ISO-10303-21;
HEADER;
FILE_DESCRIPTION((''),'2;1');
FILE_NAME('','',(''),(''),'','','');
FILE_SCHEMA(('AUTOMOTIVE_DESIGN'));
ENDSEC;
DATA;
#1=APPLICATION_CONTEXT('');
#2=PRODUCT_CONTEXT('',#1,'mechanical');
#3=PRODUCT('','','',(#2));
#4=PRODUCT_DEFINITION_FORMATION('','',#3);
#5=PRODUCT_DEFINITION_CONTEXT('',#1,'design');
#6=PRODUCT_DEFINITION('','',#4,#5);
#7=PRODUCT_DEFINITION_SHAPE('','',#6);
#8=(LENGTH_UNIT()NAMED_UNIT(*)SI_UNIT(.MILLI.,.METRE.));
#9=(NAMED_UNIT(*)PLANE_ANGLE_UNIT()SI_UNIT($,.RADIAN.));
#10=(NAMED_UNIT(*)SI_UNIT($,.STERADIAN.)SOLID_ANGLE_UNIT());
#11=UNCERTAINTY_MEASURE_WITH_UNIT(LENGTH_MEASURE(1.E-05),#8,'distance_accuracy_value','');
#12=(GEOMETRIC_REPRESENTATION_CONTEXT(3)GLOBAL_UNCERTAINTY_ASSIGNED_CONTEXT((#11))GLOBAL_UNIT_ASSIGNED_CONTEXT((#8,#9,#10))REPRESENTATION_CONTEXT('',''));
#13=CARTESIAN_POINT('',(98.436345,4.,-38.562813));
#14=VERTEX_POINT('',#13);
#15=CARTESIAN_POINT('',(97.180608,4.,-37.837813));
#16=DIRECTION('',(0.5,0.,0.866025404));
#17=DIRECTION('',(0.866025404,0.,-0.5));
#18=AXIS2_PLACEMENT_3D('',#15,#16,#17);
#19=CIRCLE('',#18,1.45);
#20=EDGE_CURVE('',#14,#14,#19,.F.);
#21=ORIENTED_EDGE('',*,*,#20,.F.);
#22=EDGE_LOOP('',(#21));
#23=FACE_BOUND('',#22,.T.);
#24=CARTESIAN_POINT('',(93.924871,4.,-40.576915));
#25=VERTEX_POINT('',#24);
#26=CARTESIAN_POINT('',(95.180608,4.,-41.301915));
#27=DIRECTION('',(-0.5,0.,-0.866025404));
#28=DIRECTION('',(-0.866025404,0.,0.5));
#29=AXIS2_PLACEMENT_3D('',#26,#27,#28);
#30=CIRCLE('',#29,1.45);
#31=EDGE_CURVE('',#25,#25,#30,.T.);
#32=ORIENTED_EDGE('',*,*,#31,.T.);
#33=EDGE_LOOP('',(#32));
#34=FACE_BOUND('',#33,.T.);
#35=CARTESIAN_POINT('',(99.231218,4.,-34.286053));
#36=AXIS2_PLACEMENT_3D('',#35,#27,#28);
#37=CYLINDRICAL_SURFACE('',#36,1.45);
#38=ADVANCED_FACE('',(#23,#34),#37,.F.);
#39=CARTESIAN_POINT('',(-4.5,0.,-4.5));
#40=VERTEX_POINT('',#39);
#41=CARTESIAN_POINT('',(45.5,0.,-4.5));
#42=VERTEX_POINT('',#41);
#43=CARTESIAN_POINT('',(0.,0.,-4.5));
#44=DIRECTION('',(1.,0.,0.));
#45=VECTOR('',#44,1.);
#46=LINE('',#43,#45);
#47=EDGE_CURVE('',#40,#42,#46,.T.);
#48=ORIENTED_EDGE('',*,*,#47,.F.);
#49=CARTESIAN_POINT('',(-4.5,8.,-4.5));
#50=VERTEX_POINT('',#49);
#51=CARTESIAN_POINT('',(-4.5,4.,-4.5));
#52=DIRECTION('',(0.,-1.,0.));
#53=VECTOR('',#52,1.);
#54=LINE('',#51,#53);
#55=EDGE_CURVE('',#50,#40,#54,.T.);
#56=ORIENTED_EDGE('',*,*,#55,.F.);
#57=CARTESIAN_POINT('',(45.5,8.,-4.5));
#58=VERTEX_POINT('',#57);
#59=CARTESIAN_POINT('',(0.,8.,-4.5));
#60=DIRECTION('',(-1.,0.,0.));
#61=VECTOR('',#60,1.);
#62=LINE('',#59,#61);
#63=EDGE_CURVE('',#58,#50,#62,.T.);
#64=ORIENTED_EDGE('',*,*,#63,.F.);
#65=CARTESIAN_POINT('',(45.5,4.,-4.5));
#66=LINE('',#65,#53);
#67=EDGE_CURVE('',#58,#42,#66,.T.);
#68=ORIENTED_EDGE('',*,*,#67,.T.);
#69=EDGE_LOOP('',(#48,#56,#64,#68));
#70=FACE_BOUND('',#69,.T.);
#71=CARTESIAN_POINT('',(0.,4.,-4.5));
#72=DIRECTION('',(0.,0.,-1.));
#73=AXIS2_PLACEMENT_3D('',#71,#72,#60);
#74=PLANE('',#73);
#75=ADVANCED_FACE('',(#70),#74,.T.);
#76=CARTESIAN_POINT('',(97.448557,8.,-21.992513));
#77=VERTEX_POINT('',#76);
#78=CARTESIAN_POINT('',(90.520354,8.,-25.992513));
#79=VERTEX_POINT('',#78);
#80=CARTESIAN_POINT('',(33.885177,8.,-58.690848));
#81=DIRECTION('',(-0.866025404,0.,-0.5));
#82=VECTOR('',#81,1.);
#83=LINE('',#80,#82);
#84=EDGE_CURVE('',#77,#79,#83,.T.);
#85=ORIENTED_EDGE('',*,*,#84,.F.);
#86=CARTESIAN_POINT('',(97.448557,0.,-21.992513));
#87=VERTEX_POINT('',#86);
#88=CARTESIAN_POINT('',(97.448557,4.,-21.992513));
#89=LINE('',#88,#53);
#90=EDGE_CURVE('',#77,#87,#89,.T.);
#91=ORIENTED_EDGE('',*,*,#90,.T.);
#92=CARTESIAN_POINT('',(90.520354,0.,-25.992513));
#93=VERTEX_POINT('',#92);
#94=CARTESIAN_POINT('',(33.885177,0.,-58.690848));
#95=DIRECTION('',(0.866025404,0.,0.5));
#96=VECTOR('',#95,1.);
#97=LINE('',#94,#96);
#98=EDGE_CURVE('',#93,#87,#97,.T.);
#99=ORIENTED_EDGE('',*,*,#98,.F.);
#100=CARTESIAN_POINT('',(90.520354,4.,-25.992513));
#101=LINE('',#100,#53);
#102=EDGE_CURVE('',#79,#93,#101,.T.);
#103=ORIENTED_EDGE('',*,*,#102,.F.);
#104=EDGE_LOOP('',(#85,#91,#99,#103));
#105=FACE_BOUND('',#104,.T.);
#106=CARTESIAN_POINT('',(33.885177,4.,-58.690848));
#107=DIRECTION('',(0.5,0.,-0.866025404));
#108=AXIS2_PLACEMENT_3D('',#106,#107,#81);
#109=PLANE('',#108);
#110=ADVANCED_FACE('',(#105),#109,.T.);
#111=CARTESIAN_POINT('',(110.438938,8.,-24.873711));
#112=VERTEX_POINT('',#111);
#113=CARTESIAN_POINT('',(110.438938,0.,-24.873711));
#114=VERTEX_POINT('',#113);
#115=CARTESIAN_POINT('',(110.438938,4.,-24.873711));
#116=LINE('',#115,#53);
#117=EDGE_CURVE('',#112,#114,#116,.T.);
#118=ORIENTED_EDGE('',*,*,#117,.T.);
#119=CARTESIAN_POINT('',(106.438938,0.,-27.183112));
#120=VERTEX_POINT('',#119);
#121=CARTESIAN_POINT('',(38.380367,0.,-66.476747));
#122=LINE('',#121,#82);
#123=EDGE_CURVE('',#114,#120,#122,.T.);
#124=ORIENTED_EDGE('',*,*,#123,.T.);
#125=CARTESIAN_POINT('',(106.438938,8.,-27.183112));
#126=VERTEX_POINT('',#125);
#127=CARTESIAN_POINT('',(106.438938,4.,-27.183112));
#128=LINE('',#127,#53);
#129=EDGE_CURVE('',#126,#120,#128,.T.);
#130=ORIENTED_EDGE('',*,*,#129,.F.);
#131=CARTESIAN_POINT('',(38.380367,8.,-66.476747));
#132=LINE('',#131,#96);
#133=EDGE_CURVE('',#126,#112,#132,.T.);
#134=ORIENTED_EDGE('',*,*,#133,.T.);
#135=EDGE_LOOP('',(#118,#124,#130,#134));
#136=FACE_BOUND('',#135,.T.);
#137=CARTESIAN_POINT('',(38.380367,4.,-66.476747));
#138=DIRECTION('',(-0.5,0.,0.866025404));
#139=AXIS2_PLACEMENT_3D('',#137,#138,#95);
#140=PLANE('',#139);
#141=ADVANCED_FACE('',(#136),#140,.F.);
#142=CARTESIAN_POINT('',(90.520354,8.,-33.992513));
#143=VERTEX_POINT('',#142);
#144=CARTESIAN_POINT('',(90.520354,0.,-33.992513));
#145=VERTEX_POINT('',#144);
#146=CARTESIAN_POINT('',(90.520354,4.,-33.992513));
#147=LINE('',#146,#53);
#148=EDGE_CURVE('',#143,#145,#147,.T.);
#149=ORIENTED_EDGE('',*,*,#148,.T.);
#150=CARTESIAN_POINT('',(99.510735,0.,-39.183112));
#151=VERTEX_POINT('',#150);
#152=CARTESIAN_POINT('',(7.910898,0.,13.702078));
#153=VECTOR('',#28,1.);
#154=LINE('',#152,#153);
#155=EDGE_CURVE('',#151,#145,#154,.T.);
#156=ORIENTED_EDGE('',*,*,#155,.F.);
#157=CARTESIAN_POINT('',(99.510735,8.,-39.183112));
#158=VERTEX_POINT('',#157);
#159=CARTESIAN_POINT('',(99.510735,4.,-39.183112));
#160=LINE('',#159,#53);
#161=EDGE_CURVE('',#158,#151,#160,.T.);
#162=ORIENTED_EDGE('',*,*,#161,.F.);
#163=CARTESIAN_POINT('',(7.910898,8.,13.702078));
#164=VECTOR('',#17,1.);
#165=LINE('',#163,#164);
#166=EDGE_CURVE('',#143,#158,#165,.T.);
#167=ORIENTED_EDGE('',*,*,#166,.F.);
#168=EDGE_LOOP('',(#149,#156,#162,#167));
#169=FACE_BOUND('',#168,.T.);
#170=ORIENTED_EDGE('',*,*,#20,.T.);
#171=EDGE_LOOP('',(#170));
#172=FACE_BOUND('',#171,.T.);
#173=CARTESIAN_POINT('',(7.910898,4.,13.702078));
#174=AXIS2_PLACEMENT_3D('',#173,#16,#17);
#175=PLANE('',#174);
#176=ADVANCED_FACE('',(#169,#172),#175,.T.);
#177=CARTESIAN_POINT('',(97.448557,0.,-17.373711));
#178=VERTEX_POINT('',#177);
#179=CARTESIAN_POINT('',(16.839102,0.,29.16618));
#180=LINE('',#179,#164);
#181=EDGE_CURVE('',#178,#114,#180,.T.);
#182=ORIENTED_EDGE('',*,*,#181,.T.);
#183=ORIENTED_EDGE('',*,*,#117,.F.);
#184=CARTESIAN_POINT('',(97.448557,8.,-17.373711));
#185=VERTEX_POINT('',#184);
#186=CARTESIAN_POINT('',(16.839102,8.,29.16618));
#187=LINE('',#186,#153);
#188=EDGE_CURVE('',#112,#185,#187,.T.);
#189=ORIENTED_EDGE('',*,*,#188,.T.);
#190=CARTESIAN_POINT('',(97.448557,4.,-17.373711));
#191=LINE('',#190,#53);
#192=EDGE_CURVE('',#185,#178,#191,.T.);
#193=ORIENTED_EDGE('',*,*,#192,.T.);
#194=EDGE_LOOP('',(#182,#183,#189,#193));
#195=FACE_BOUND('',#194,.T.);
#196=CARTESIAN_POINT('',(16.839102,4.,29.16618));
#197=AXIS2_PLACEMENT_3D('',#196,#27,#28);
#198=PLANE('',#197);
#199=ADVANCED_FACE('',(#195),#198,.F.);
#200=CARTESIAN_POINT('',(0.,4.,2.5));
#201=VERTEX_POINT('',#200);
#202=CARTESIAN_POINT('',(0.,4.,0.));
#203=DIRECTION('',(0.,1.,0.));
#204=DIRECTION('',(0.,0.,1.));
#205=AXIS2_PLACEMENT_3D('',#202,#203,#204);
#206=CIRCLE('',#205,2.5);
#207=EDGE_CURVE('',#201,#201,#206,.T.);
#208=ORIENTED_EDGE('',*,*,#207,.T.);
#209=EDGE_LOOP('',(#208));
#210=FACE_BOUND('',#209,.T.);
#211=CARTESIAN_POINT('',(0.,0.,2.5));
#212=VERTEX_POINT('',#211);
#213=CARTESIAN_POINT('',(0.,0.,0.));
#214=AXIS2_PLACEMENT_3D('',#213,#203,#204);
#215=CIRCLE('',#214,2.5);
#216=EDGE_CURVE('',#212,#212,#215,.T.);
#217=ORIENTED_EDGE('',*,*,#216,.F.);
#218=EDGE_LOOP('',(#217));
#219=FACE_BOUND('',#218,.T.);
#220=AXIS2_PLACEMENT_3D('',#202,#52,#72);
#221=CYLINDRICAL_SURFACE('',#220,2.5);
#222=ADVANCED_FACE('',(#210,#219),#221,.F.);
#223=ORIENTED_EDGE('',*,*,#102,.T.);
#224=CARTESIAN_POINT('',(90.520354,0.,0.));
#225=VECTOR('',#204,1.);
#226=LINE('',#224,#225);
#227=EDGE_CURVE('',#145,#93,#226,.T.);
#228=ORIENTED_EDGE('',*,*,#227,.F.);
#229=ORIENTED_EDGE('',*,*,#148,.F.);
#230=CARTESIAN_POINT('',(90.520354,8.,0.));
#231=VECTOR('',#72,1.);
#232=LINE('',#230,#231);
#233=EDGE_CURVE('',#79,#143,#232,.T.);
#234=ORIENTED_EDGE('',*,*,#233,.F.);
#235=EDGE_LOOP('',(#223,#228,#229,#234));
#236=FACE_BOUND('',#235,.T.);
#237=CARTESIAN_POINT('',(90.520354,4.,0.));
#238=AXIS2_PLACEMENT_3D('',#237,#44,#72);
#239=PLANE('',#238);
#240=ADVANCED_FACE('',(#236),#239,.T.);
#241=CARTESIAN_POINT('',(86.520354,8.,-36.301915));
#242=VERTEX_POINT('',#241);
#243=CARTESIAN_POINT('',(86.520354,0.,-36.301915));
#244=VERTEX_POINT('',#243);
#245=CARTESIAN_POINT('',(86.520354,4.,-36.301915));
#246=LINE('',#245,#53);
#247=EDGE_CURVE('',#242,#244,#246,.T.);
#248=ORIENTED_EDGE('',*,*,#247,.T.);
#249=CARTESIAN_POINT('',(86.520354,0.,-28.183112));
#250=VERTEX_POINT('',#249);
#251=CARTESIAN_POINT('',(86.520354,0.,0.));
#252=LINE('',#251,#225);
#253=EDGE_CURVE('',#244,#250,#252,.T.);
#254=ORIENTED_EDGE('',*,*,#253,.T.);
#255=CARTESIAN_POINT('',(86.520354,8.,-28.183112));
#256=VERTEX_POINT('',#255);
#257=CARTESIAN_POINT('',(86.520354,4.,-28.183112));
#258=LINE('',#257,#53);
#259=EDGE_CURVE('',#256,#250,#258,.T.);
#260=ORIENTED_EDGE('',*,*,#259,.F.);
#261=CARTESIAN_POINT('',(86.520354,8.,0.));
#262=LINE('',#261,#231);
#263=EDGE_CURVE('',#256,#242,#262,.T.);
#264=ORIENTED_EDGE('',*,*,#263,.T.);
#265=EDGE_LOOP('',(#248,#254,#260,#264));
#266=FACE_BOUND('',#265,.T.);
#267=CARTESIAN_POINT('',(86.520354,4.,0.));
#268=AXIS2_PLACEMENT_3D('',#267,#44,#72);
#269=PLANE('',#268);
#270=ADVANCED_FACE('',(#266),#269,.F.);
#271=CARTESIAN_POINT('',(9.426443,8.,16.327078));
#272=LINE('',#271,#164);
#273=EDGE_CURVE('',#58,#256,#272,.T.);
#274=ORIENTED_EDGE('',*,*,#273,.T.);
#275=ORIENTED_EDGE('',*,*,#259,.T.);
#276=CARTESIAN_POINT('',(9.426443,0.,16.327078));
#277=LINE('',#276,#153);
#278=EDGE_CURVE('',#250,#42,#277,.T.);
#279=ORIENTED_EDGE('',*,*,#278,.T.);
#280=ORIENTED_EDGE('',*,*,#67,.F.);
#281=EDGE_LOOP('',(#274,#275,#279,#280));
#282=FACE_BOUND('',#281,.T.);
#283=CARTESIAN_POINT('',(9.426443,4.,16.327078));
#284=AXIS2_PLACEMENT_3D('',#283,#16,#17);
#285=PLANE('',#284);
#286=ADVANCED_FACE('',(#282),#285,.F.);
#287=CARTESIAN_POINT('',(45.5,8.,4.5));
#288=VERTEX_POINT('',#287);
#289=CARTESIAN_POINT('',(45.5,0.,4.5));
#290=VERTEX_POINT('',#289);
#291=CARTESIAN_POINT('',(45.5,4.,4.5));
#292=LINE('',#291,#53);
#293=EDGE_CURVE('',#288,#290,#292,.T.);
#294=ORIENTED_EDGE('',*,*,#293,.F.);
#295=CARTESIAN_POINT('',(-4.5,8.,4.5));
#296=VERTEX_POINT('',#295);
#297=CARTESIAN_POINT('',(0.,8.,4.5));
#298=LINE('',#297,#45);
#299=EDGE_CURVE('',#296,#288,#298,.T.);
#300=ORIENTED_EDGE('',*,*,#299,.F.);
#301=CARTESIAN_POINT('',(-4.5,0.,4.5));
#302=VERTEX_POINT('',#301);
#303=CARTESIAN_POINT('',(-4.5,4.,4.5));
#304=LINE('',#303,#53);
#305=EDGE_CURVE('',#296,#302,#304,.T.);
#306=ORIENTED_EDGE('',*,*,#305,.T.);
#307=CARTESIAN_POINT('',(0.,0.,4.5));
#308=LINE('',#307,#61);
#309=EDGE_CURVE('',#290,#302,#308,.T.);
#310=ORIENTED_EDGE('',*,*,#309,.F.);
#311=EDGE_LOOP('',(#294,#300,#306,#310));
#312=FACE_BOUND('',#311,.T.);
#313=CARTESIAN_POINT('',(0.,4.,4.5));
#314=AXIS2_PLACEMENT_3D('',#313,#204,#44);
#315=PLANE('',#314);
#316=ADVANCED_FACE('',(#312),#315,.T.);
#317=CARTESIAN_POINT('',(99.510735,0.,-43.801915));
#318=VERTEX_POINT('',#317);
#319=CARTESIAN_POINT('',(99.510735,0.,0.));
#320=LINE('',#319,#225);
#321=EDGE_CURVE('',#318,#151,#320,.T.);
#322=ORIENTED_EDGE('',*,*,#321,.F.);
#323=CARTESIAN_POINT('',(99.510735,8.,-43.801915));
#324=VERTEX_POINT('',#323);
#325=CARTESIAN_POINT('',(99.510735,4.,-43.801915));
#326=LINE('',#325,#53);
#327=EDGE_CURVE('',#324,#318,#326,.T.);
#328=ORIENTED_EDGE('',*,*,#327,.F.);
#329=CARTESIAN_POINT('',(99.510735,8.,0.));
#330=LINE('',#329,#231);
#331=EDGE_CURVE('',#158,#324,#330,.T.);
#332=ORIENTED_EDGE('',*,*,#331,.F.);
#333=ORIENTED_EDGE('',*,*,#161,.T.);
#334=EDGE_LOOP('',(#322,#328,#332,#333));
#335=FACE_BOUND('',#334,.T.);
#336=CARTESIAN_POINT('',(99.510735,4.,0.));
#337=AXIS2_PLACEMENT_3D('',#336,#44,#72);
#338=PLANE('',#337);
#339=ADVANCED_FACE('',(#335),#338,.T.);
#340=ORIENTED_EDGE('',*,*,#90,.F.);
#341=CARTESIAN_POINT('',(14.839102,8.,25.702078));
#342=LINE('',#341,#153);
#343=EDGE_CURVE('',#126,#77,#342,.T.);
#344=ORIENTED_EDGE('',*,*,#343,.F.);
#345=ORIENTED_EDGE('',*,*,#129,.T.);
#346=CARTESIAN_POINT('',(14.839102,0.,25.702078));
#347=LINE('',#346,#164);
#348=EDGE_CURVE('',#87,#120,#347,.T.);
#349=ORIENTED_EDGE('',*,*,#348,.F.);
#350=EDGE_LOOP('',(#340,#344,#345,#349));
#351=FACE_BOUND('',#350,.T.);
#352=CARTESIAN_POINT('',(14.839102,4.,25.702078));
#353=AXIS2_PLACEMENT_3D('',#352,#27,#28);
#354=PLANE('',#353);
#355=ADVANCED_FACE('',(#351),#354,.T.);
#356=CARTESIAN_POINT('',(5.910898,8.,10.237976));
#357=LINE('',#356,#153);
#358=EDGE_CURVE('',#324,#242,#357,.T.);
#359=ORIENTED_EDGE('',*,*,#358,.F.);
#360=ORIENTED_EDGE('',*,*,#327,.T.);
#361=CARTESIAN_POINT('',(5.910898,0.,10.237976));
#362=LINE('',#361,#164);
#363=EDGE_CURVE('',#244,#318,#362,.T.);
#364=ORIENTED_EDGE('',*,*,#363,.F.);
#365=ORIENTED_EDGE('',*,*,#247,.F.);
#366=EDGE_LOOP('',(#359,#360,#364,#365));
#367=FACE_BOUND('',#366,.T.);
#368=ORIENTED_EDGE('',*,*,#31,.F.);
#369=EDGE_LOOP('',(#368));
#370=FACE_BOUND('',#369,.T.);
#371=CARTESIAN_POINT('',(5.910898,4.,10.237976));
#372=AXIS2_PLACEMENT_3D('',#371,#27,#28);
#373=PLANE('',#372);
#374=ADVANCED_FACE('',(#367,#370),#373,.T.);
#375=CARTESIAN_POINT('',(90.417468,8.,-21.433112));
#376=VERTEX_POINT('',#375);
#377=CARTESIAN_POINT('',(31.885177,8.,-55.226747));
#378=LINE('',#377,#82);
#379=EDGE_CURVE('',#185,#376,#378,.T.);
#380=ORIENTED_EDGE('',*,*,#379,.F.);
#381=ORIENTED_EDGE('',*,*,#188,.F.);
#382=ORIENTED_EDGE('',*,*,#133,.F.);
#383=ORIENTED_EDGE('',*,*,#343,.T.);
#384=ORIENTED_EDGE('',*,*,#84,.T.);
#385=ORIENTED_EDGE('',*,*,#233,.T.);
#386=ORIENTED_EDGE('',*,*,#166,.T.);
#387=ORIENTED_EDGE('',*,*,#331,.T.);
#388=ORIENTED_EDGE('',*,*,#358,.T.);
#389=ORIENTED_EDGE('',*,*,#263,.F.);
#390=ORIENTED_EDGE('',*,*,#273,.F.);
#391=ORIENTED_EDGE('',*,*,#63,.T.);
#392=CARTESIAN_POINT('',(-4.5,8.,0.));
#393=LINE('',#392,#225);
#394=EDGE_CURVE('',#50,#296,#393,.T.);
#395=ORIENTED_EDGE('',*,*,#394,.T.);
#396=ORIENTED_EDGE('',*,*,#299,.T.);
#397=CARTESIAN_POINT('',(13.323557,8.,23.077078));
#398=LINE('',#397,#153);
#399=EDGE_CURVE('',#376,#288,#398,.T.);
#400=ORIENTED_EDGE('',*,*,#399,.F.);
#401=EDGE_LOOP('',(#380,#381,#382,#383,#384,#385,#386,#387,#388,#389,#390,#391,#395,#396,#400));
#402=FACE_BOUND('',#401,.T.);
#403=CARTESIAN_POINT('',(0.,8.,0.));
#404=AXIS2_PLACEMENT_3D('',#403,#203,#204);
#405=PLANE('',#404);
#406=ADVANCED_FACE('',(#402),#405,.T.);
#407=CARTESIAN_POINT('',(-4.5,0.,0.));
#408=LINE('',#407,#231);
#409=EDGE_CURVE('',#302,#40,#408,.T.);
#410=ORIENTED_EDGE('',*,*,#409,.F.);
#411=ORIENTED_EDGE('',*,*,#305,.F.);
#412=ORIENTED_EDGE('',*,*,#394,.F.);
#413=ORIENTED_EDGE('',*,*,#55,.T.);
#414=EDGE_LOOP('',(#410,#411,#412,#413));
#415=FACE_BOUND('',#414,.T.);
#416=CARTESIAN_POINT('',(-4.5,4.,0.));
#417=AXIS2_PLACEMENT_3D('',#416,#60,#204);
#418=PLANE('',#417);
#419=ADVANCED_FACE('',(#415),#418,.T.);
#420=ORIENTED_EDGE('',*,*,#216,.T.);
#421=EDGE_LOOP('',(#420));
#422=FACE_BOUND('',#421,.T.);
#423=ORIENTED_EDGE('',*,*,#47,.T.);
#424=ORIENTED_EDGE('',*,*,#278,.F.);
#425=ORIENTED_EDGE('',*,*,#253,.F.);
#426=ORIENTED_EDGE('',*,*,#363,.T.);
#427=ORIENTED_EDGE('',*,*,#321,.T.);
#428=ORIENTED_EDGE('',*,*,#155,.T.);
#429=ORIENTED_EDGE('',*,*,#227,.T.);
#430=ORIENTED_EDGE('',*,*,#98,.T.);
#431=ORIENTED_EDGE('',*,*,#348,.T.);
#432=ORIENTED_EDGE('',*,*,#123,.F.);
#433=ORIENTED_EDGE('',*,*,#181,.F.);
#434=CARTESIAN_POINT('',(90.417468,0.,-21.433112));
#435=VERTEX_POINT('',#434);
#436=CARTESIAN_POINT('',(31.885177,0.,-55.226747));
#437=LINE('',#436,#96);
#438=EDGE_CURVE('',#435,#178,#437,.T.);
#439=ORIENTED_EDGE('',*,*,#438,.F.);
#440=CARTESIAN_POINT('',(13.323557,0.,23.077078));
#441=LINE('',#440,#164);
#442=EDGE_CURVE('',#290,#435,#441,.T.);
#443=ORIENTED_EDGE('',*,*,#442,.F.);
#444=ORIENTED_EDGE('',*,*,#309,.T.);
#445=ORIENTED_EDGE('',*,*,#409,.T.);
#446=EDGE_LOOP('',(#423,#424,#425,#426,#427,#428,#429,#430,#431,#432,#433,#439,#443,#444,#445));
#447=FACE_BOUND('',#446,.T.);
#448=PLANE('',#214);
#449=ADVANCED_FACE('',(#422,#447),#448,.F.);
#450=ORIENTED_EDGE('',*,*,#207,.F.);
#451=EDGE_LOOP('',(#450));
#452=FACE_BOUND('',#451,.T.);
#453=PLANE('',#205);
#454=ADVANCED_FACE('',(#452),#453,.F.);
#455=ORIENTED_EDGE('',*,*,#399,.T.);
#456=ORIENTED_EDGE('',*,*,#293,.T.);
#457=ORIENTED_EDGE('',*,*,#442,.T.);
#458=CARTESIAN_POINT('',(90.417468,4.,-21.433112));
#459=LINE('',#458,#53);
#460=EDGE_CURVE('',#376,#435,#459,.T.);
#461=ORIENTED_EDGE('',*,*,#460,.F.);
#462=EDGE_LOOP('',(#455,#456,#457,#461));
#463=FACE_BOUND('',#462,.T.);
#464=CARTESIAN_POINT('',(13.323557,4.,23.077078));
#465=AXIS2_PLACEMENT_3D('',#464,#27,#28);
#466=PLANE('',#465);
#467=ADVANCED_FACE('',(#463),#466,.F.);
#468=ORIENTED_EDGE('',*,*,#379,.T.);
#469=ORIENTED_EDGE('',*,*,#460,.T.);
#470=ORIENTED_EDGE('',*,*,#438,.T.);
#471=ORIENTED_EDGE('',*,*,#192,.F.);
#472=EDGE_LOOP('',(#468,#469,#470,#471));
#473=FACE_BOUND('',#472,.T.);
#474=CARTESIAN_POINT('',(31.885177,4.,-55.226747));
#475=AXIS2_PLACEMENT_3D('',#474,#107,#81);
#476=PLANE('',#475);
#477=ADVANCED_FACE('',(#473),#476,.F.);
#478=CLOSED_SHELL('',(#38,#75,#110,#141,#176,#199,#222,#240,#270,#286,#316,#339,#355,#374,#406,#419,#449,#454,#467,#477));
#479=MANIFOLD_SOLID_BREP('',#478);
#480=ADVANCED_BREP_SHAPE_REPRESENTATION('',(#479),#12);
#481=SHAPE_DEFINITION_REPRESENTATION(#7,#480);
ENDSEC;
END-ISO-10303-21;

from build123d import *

# Parameters (mm, degrees)
SKETCH1_R           = 2.5
BOSS_EXTRUDE1_DEPTH = 4
BOSS_EXTRUDE2_START = 4
BOSS_EXTRUDE2_DEPTH = 4
SKETCH4_R           = 1.45
CUT_EXTRUDE1_DEPTH  = 4


# Read off the part's stored shape, not the designer's step: Boss-Extrude2
with BuildPart() as part:
    # Sketch1 → Boss-Extrude1 (new body)
    with BuildSketch(Plane(origin=(0, 0, 0), x_dir=(1, 0, 0), z_dir=(0, 1, 0))):
        Polygon((-4.5, -4.5), (45.5, -4.5), (90.417468245, 21.433112383), (97.448557159, 17.373711306), (110.438938215, 24.873711306), (106.438938215, 27.183112383), (104.376760389, 25.992513459), (97.448557159, 21.992513459), (90.520353928, 25.992513459), (90.520353928, 33.992513459), (99.510734985, 39.183112383), (99.510734985, 43.801914536), (86.520353928, 36.301914536), (86.520353928, 28.183112383), (45.5, 4.5), (-4.5, 4.5), align=None)
        with Locations(Location((0, 0, 0), (0, 0, 270))):
            Circle(SKETCH1_R, mode=Mode.SUBTRACT)
    extrude(amount=BOSS_EXTRUDE1_DEPTH)

    # Boss-Extrude2 outline → Boss-Extrude2 (add)
    with BuildSketch(Plane(origin=(0, 0, 0), x_dir=(1, 0, 0), z_dir=(0, 1, 0)).offset(BOSS_EXTRUDE2_START)):
        Polygon((99.510734985, 39.183112383), (99.510734985, 43.801914536), (86.520353928, 36.301914536), (86.520353928, 28.183112383), (45.5, 4.5), (-4.5, 4.5), (-4.5, -4.5), (45.5, -4.5), (90.417468245, 21.433112383), (97.448557159, 17.373711306), (110.438938215, 24.873711306), (106.438938215, 27.183112383), (97.448557159, 21.992513459), (90.520353928, 25.992513459), (90.520353928, 33.992513459), align=None)
    extrude(amount=BOSS_EXTRUDE2_DEPTH)

    # Sketch4 → Cut-Extrude1 (cut)
    with BuildSketch(Plane(origin=(5.910898385, 0, 10.237976321), x_dir=(-0.8660254037844413, 0, 0.4999999999999956), z_dir=(-0.4999999999999956, 0, -0.8660254037844413))):
        with Locations((-103.079781714, 4)):
            Circle(SKETCH4_R)
    extrude(amount=-CUT_EXTRUDE1_DEPTH, mode=Mode.SUBTRACT)


solid = part.part
